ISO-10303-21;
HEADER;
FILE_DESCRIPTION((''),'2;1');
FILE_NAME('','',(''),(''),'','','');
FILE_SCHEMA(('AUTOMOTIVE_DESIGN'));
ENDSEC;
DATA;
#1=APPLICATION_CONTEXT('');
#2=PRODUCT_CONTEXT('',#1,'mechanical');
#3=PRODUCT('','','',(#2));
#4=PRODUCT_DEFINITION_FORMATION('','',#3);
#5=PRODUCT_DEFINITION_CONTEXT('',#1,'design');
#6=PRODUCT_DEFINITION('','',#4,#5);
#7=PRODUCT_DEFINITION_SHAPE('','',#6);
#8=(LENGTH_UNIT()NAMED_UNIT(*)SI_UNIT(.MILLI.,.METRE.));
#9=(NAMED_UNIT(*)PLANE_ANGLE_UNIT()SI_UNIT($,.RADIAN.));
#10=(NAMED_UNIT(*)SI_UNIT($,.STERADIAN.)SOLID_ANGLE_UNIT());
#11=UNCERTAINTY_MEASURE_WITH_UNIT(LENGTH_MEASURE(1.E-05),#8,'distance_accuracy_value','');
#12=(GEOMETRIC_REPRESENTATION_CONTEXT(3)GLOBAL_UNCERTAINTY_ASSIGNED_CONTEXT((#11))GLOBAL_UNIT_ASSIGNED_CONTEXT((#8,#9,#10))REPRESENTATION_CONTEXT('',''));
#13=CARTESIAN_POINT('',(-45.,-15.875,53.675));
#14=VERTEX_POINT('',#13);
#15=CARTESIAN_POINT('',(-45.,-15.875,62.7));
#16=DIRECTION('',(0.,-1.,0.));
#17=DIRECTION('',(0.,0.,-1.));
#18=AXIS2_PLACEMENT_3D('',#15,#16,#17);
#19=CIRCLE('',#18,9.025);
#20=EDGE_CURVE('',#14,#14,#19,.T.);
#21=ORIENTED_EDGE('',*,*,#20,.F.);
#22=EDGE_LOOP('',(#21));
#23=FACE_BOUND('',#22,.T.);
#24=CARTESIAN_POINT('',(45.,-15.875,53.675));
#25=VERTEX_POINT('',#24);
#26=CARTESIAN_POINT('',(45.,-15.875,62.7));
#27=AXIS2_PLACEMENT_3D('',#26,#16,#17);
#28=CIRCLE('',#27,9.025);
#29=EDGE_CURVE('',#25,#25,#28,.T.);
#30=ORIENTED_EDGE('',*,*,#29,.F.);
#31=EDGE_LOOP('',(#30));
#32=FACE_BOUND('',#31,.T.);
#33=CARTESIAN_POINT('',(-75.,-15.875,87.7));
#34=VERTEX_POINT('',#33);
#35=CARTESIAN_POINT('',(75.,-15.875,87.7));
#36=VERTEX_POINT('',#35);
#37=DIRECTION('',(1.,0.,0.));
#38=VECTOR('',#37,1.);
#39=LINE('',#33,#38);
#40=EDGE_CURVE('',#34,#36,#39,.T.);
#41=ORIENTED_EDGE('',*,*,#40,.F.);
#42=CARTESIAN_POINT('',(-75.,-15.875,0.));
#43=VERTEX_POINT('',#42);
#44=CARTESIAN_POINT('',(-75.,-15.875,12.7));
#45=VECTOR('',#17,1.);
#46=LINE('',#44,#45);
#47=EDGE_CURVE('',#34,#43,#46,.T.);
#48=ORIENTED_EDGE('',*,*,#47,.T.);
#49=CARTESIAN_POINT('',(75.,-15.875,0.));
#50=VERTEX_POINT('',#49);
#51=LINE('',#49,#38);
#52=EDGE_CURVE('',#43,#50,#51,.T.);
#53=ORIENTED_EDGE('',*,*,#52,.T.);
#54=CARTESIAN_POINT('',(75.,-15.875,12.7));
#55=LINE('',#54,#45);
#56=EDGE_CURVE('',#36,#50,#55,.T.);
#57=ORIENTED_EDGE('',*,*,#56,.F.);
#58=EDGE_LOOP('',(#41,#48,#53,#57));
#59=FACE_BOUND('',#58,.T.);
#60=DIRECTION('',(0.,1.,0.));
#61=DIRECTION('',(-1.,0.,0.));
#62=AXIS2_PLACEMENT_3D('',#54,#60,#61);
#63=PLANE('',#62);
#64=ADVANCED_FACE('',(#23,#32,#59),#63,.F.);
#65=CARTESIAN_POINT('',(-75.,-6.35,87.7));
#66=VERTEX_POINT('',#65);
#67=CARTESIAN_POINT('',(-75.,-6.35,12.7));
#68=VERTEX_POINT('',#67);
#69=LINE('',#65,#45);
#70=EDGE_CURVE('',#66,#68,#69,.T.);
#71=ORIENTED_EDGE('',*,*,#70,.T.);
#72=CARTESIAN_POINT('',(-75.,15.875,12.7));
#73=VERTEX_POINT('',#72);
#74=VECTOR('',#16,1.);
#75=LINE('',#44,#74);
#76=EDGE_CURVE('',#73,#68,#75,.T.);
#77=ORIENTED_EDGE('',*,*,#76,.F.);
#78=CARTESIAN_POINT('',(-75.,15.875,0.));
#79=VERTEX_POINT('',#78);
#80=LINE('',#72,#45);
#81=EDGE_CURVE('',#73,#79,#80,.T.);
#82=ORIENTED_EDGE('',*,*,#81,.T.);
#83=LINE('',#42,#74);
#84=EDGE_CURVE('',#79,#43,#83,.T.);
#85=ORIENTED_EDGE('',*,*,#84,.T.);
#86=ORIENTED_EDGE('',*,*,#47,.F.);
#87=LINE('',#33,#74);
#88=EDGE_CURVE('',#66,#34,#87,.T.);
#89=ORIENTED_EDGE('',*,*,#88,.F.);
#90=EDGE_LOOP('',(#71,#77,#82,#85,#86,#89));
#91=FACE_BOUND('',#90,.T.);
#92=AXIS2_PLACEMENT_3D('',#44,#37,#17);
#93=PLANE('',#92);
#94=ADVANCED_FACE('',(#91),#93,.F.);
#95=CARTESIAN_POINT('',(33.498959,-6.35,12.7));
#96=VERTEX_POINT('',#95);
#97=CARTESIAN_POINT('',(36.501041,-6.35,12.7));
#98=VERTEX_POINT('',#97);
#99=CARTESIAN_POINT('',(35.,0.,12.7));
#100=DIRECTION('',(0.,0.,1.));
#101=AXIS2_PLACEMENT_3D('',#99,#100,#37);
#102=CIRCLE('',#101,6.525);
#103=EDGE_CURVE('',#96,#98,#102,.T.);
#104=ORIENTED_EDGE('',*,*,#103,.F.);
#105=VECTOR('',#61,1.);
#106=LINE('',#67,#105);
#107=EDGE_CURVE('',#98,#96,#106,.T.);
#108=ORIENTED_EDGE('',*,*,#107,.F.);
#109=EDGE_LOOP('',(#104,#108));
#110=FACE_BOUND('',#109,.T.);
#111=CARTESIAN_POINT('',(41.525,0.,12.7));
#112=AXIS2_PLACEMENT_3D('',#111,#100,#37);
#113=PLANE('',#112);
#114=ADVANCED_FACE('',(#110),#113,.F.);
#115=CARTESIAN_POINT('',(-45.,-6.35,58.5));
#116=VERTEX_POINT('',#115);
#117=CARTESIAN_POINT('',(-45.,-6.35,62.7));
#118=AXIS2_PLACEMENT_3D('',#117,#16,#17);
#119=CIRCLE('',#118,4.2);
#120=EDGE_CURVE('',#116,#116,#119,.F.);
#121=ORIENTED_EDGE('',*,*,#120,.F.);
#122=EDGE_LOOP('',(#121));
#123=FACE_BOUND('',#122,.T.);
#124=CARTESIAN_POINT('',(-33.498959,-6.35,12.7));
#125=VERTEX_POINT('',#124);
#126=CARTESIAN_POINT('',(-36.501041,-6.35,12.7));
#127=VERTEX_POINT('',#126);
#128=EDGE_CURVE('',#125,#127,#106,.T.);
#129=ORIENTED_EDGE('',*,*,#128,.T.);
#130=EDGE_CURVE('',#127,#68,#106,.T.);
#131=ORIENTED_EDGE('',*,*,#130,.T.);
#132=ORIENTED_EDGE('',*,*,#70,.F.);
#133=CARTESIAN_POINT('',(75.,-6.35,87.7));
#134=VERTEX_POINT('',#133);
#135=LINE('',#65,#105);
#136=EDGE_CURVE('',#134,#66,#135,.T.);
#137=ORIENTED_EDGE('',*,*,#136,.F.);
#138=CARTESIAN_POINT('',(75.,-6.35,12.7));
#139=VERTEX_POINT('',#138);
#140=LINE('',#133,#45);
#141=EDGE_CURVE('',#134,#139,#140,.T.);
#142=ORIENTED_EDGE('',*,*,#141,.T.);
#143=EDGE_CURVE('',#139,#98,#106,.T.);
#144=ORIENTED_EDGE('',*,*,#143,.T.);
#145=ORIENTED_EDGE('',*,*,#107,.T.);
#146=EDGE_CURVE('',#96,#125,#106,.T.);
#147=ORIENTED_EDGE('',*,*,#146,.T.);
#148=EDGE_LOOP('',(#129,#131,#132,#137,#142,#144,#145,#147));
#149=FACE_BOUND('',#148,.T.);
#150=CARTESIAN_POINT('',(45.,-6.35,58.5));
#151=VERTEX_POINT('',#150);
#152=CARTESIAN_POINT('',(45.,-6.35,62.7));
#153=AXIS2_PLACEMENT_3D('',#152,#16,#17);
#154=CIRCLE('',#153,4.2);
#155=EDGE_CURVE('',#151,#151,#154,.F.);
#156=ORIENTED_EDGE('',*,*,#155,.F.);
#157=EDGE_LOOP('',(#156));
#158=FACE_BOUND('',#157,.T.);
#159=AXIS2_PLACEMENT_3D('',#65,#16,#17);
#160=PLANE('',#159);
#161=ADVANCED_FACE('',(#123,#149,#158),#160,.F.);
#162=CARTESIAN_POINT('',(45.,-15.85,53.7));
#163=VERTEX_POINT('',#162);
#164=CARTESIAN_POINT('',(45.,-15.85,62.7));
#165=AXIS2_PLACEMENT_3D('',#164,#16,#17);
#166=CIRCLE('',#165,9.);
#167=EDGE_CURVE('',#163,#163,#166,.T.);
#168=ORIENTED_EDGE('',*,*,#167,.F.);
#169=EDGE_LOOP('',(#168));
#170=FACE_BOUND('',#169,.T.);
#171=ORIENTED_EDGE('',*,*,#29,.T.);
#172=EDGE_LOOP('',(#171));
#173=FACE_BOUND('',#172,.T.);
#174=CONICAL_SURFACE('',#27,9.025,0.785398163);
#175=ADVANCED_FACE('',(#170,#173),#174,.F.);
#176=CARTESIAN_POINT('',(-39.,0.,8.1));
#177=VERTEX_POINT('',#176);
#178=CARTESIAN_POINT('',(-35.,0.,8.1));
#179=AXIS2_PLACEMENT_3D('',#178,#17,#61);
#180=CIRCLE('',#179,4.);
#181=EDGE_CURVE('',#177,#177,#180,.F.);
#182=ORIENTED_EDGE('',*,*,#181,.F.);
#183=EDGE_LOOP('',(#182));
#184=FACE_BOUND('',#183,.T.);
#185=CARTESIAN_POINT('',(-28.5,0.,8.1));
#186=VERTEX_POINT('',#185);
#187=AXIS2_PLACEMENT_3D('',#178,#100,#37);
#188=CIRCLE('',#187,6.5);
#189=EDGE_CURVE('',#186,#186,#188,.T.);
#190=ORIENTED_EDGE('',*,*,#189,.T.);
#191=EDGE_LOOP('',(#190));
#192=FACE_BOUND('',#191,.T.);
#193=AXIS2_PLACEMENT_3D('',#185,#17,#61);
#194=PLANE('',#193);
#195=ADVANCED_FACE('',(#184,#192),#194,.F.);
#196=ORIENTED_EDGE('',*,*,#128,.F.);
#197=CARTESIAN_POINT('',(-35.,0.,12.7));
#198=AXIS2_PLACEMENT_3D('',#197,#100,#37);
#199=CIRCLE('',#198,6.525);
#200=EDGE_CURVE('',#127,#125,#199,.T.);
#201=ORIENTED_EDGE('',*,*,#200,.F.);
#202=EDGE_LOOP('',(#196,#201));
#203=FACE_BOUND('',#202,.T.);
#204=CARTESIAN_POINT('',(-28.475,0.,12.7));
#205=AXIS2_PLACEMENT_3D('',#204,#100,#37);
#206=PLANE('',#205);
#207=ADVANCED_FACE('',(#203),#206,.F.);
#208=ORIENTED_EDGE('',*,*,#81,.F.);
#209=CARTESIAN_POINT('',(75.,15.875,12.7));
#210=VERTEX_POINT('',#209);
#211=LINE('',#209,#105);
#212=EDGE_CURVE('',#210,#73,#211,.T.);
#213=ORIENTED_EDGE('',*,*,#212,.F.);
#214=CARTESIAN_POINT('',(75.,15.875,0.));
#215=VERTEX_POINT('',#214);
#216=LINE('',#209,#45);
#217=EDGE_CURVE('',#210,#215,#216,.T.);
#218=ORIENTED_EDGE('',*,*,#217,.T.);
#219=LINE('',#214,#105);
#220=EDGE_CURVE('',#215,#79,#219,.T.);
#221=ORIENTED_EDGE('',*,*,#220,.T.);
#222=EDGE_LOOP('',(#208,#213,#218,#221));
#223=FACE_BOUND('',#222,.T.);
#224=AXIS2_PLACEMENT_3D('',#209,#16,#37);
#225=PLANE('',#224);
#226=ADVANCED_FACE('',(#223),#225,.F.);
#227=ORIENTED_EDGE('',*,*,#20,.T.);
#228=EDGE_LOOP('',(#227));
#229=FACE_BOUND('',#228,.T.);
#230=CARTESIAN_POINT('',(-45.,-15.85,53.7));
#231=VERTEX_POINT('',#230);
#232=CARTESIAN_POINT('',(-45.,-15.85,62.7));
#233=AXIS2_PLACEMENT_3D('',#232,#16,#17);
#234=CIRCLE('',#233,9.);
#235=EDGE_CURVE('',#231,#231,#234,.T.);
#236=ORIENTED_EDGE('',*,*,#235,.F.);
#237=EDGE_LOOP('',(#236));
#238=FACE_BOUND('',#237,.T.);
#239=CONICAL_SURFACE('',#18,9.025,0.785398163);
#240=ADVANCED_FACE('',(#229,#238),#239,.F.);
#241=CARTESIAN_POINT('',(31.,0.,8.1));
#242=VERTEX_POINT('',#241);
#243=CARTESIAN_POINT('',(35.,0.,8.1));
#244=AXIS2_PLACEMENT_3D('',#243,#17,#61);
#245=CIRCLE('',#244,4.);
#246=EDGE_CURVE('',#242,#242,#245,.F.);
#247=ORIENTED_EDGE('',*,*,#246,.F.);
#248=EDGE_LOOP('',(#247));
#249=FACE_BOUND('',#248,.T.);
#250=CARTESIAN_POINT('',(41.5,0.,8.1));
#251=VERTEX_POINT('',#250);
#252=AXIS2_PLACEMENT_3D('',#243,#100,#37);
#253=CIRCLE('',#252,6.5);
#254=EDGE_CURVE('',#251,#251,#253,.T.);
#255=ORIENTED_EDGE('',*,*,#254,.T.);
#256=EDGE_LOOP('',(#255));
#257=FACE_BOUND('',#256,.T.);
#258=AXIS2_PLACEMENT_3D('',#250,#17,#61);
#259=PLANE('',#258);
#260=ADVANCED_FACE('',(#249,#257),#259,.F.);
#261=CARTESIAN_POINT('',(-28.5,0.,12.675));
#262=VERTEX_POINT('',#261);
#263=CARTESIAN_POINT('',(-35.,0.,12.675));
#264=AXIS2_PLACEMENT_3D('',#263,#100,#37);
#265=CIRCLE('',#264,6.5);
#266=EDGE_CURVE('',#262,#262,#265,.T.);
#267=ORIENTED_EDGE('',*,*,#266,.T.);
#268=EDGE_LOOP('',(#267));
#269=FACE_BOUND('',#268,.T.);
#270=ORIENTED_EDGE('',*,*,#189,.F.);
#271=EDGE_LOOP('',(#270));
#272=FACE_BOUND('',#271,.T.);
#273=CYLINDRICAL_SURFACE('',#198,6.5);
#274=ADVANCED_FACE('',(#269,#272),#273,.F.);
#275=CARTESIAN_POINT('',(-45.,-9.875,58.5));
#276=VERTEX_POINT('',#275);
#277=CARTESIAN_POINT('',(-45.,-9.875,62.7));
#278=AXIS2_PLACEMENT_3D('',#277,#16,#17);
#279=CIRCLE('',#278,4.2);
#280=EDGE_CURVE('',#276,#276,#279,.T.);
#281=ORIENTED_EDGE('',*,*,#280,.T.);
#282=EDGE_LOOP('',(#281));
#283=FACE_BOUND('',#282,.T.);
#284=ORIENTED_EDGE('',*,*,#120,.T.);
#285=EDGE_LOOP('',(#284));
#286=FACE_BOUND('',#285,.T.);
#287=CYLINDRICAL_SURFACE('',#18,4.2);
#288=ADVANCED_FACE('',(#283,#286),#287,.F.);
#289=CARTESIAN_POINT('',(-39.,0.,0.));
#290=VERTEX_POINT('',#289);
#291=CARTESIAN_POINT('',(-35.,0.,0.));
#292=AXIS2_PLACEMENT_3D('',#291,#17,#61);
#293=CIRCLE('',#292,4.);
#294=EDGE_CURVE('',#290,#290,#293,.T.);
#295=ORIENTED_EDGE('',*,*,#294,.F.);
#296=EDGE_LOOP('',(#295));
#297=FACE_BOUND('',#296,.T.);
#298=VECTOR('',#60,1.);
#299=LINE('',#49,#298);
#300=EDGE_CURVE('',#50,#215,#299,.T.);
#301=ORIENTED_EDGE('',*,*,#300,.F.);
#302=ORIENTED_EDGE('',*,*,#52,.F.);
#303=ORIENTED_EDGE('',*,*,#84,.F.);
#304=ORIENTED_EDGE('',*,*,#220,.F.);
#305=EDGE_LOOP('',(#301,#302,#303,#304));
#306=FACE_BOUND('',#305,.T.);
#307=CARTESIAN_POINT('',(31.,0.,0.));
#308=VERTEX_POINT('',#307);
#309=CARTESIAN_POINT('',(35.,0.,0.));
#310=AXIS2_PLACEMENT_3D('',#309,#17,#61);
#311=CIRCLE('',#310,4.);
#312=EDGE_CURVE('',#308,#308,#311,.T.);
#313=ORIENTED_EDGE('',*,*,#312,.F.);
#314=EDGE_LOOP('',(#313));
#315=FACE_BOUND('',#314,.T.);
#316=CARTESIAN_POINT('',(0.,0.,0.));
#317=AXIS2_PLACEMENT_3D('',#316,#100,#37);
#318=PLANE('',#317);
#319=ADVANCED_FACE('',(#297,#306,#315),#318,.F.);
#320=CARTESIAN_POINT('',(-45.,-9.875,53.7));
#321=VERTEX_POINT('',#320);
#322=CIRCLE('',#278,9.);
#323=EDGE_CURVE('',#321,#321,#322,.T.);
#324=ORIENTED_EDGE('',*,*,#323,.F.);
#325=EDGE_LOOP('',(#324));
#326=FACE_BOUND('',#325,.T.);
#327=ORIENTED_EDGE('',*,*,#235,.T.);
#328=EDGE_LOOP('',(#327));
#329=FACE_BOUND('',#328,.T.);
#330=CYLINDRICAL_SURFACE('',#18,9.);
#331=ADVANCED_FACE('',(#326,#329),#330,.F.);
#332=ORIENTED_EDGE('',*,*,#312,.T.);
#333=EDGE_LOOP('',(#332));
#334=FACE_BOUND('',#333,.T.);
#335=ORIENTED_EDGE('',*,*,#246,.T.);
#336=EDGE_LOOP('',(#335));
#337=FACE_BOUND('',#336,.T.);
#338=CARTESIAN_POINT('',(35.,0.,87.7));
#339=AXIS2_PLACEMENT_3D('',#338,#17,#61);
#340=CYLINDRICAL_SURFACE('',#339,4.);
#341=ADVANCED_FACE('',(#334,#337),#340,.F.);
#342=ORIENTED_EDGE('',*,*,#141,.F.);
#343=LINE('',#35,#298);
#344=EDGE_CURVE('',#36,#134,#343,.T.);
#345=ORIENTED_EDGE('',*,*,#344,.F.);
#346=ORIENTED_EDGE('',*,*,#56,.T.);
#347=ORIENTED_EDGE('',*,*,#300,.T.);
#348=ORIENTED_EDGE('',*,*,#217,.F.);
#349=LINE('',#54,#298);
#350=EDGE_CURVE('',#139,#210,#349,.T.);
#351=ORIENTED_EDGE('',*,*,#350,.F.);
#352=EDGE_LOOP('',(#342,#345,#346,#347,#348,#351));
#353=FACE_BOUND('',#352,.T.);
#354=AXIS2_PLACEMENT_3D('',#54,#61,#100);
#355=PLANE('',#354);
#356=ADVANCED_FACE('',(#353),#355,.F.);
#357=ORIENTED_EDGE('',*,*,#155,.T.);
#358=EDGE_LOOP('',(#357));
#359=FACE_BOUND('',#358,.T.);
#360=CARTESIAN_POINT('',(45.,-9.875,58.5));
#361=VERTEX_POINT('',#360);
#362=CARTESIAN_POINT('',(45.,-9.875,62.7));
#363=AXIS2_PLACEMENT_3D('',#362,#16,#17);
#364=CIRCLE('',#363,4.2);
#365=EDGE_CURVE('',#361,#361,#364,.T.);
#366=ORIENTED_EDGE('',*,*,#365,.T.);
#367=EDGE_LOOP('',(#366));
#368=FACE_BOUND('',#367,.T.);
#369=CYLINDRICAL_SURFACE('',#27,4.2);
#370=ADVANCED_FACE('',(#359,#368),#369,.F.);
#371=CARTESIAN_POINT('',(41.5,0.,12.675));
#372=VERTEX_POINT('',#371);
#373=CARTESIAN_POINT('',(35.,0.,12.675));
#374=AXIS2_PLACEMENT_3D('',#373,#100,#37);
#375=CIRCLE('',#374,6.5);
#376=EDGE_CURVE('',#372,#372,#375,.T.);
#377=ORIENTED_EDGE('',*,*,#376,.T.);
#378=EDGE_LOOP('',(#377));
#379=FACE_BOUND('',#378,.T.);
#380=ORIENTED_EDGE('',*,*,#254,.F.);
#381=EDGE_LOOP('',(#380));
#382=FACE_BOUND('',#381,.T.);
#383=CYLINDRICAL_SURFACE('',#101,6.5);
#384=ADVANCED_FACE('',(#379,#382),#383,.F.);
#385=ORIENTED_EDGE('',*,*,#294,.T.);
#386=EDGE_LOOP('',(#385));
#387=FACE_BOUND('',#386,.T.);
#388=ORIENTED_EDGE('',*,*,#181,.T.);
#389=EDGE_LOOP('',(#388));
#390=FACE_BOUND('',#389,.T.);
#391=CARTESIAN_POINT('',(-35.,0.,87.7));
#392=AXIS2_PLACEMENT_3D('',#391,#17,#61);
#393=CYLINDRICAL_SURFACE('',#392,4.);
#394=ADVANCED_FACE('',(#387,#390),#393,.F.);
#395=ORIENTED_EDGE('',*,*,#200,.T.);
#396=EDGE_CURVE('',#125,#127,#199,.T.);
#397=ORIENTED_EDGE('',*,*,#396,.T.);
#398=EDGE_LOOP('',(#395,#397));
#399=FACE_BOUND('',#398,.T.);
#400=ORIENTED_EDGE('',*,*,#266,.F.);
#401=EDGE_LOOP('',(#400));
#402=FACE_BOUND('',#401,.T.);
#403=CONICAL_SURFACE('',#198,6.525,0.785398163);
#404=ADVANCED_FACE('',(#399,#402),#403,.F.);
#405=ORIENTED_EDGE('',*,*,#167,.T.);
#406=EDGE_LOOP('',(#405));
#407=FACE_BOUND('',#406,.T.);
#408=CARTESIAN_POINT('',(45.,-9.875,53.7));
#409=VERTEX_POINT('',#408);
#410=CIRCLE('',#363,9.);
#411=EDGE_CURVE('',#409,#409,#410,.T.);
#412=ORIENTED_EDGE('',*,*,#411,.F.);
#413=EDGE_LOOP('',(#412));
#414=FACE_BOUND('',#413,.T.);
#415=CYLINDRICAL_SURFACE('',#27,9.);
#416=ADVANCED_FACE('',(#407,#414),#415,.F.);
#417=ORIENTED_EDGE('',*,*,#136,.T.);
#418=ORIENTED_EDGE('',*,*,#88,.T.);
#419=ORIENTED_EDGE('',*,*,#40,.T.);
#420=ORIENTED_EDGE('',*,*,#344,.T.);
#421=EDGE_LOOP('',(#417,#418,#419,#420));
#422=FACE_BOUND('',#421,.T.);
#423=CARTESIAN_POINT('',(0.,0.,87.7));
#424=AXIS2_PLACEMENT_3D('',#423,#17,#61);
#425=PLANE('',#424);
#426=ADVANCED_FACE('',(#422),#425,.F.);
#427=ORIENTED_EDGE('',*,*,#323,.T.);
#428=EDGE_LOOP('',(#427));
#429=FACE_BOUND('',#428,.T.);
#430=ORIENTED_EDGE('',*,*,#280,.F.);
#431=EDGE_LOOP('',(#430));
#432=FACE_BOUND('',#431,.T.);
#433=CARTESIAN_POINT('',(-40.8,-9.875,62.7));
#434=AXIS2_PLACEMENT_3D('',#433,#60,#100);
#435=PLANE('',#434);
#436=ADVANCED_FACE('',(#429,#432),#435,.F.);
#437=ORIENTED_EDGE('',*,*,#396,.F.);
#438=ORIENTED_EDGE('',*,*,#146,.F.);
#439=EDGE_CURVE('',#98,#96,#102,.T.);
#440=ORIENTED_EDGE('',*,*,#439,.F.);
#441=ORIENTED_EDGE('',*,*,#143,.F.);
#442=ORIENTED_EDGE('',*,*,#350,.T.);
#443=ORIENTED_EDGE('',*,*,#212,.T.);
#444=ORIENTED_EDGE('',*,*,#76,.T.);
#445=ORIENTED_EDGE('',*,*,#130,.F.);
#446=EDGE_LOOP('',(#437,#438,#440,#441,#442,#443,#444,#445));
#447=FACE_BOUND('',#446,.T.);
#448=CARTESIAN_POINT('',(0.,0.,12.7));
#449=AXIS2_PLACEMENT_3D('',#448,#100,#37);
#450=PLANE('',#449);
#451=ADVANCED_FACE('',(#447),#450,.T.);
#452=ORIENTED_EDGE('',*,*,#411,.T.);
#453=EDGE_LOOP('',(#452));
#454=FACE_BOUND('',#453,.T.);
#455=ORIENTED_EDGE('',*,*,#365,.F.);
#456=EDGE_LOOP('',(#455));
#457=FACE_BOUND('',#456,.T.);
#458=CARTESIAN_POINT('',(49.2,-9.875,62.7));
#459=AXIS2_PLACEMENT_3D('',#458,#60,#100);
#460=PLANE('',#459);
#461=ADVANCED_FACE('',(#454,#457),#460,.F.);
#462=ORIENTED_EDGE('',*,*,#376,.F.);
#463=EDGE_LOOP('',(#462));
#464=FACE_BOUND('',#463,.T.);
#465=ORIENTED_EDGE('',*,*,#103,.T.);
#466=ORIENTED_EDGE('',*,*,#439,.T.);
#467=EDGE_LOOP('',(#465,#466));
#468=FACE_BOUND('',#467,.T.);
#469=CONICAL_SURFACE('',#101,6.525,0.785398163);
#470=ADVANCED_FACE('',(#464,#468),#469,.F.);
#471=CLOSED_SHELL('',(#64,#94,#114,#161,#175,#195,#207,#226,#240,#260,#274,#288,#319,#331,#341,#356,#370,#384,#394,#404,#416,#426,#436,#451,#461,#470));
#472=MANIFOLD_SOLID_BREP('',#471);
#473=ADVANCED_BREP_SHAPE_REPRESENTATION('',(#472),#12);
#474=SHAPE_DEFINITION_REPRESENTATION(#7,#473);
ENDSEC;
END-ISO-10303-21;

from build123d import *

# Parameters (mm, degrees)
ESBO_O1_W                                    = 150
ESBO_O1_H                                    = 31.75
RESSALTO_EXTRUS_O1_DEPTH                     = 12.7
ESBO_O2_W                                    = 150
ESBO_O2_H                                    = 9.525
RESSALTO_EXTRUS_O2_DEPTH                     = 75
ESBO_O4_R                                    = 4
CORTE_EXTRUS_O1_DEPTH                        = 117.483070122
REBAIXO_PARA_PARAFUSO_COM_CABE_A_PAN_2_COUNT = 2
REBAIXO_PARA_PARAFUSO_COM_CABE_A_PAN_2_PITCH = 70
ESBO_O7_R                                    = 3
CORTE_EXTRUS_O2_DEPTH                        = 9.525


# Read off the part's stored shape, not the designer's step: Rebaixo para parafuso com cabeça panela de M81
with BuildPart() as part:
    # Esboço1 → Ressalto-extrusão1 (new body)
    with BuildSketch(Plane.XY):
        Rectangle(ESBO_O1_W, ESBO_O1_H)
    extrude(amount=RESSALTO_EXTRUS_O1_DEPTH)

    # Esboço2 → Ressalto-extrusão2 (add)
    with BuildSketch(Plane.XY.offset(12.7)):
        with Locations((0, -11.1125)):
            Rectangle(ESBO_O2_W, ESBO_O2_H)
    extrude(amount=RESSALTO_EXTRUS_O2_DEPTH)

    # Esboço4 → Corte-extrusão1 (cut, through all)
    with BuildSketch(Plane(origin=(0, 0, 0), x_dir=(-1, 0, 0), z_dir=(0, 0, -1))):
        with Locations((-35, 0)):
            Circle(ESBO_O4_R)
        with Locations((35, 0)):
            Circle(ESBO_O4_R)
    extrude(amount=-CORTE_EXTRUS_O1_DEPTH, mode=Mode.SUBTRACT)

    # Esboço6 → Rebaixo para parafuso com cabe_a panela (revolve, cut)
    with BuildSketch(Plane(origin=(-35, 0, 12.7), x_dir=(0, -1, 0), z_dir=(1, 0, 0))):
        Polygon((0, 0), (0, 12.7), (3.3, 12.7), (3.3, 4.6), (6.5, 4.6), (6.5, 0.025), (6.525, 0), align=None)
    rebaixo_para_parafuso_com_cabe_a_panela = revolve(axis=Axis((-35, 0, 19.05), (0, 0, -1)), mode=Mode.SUBTRACT)

    # Rebaixo para parafuso com cabe_a pan 2: Rebaixo para parafuso com cabe_a panela ×2
    with Locations(*[(i * REBAIXO_PARA_PARAFUSO_COM_CABE_A_PAN_2_PITCH, 0, 0) for i in range(1, REBAIXO_PARA_PARAFUSO_COM_CABE_A_PAN_2_COUNT)]):
        add(rebaixo_para_parafuso_com_cabe_a_panela, mode=Mode.SUBTRACT)

    # Esboço7 → Corte-extrusão2 (cut)
    with BuildSketch(Plane.XZ.offset(15.875)):
        with Locations((-45, 62.7)):
            Circle(ESBO_O7_R)
        with Locations((45, 62.7)):
            Circle(ESBO_O7_R)
    extrude(amount=-CORTE_EXTRUS_O2_DEPTH, mode=Mode.SUBTRACT)

    # Rebaixo para parafuso com cabe_a pan 3 o → Rebaixo para parafuso com cabe_a pan 3 (revolve, cut)
    with BuildSketch(Plane(origin=(45, 0, 62.7), x_dir=(1, 0, 0), z_dir=(0, 0, 1))):
        Polygon((4.2, -9.875), (4.2, -6.35), (3, -6.35), (3, -15.875), (9.025, -15.875), (9, -15.85), (9, -9.875), align=None)
    revolve(axis=Axis((45, 0, 62.7), (0, 1, 0)), mode=Mode.SUBTRACT)

    # Rebaixo para parafuso com cabe_a pan 4 → Rebaixo para parafuso com cabe_a pan 3 2 (revolve, cut)
    with BuildSketch(Plane(origin=(-45, 0, 62.7), x_dir=(1, 0, 0), z_dir=(0, 0, 1))):
        Polygon((3, -15.875), (9.025, -15.875), (9, -15.85), (9, -9.875), (4.2, -9.875), (4.2, -6.35), (3, -6.35), align=None)
    revolve(axis=Axis((-45, 0, 62.7), (0, 1, 0)), mode=Mode.SUBTRACT)


solid = part.part
